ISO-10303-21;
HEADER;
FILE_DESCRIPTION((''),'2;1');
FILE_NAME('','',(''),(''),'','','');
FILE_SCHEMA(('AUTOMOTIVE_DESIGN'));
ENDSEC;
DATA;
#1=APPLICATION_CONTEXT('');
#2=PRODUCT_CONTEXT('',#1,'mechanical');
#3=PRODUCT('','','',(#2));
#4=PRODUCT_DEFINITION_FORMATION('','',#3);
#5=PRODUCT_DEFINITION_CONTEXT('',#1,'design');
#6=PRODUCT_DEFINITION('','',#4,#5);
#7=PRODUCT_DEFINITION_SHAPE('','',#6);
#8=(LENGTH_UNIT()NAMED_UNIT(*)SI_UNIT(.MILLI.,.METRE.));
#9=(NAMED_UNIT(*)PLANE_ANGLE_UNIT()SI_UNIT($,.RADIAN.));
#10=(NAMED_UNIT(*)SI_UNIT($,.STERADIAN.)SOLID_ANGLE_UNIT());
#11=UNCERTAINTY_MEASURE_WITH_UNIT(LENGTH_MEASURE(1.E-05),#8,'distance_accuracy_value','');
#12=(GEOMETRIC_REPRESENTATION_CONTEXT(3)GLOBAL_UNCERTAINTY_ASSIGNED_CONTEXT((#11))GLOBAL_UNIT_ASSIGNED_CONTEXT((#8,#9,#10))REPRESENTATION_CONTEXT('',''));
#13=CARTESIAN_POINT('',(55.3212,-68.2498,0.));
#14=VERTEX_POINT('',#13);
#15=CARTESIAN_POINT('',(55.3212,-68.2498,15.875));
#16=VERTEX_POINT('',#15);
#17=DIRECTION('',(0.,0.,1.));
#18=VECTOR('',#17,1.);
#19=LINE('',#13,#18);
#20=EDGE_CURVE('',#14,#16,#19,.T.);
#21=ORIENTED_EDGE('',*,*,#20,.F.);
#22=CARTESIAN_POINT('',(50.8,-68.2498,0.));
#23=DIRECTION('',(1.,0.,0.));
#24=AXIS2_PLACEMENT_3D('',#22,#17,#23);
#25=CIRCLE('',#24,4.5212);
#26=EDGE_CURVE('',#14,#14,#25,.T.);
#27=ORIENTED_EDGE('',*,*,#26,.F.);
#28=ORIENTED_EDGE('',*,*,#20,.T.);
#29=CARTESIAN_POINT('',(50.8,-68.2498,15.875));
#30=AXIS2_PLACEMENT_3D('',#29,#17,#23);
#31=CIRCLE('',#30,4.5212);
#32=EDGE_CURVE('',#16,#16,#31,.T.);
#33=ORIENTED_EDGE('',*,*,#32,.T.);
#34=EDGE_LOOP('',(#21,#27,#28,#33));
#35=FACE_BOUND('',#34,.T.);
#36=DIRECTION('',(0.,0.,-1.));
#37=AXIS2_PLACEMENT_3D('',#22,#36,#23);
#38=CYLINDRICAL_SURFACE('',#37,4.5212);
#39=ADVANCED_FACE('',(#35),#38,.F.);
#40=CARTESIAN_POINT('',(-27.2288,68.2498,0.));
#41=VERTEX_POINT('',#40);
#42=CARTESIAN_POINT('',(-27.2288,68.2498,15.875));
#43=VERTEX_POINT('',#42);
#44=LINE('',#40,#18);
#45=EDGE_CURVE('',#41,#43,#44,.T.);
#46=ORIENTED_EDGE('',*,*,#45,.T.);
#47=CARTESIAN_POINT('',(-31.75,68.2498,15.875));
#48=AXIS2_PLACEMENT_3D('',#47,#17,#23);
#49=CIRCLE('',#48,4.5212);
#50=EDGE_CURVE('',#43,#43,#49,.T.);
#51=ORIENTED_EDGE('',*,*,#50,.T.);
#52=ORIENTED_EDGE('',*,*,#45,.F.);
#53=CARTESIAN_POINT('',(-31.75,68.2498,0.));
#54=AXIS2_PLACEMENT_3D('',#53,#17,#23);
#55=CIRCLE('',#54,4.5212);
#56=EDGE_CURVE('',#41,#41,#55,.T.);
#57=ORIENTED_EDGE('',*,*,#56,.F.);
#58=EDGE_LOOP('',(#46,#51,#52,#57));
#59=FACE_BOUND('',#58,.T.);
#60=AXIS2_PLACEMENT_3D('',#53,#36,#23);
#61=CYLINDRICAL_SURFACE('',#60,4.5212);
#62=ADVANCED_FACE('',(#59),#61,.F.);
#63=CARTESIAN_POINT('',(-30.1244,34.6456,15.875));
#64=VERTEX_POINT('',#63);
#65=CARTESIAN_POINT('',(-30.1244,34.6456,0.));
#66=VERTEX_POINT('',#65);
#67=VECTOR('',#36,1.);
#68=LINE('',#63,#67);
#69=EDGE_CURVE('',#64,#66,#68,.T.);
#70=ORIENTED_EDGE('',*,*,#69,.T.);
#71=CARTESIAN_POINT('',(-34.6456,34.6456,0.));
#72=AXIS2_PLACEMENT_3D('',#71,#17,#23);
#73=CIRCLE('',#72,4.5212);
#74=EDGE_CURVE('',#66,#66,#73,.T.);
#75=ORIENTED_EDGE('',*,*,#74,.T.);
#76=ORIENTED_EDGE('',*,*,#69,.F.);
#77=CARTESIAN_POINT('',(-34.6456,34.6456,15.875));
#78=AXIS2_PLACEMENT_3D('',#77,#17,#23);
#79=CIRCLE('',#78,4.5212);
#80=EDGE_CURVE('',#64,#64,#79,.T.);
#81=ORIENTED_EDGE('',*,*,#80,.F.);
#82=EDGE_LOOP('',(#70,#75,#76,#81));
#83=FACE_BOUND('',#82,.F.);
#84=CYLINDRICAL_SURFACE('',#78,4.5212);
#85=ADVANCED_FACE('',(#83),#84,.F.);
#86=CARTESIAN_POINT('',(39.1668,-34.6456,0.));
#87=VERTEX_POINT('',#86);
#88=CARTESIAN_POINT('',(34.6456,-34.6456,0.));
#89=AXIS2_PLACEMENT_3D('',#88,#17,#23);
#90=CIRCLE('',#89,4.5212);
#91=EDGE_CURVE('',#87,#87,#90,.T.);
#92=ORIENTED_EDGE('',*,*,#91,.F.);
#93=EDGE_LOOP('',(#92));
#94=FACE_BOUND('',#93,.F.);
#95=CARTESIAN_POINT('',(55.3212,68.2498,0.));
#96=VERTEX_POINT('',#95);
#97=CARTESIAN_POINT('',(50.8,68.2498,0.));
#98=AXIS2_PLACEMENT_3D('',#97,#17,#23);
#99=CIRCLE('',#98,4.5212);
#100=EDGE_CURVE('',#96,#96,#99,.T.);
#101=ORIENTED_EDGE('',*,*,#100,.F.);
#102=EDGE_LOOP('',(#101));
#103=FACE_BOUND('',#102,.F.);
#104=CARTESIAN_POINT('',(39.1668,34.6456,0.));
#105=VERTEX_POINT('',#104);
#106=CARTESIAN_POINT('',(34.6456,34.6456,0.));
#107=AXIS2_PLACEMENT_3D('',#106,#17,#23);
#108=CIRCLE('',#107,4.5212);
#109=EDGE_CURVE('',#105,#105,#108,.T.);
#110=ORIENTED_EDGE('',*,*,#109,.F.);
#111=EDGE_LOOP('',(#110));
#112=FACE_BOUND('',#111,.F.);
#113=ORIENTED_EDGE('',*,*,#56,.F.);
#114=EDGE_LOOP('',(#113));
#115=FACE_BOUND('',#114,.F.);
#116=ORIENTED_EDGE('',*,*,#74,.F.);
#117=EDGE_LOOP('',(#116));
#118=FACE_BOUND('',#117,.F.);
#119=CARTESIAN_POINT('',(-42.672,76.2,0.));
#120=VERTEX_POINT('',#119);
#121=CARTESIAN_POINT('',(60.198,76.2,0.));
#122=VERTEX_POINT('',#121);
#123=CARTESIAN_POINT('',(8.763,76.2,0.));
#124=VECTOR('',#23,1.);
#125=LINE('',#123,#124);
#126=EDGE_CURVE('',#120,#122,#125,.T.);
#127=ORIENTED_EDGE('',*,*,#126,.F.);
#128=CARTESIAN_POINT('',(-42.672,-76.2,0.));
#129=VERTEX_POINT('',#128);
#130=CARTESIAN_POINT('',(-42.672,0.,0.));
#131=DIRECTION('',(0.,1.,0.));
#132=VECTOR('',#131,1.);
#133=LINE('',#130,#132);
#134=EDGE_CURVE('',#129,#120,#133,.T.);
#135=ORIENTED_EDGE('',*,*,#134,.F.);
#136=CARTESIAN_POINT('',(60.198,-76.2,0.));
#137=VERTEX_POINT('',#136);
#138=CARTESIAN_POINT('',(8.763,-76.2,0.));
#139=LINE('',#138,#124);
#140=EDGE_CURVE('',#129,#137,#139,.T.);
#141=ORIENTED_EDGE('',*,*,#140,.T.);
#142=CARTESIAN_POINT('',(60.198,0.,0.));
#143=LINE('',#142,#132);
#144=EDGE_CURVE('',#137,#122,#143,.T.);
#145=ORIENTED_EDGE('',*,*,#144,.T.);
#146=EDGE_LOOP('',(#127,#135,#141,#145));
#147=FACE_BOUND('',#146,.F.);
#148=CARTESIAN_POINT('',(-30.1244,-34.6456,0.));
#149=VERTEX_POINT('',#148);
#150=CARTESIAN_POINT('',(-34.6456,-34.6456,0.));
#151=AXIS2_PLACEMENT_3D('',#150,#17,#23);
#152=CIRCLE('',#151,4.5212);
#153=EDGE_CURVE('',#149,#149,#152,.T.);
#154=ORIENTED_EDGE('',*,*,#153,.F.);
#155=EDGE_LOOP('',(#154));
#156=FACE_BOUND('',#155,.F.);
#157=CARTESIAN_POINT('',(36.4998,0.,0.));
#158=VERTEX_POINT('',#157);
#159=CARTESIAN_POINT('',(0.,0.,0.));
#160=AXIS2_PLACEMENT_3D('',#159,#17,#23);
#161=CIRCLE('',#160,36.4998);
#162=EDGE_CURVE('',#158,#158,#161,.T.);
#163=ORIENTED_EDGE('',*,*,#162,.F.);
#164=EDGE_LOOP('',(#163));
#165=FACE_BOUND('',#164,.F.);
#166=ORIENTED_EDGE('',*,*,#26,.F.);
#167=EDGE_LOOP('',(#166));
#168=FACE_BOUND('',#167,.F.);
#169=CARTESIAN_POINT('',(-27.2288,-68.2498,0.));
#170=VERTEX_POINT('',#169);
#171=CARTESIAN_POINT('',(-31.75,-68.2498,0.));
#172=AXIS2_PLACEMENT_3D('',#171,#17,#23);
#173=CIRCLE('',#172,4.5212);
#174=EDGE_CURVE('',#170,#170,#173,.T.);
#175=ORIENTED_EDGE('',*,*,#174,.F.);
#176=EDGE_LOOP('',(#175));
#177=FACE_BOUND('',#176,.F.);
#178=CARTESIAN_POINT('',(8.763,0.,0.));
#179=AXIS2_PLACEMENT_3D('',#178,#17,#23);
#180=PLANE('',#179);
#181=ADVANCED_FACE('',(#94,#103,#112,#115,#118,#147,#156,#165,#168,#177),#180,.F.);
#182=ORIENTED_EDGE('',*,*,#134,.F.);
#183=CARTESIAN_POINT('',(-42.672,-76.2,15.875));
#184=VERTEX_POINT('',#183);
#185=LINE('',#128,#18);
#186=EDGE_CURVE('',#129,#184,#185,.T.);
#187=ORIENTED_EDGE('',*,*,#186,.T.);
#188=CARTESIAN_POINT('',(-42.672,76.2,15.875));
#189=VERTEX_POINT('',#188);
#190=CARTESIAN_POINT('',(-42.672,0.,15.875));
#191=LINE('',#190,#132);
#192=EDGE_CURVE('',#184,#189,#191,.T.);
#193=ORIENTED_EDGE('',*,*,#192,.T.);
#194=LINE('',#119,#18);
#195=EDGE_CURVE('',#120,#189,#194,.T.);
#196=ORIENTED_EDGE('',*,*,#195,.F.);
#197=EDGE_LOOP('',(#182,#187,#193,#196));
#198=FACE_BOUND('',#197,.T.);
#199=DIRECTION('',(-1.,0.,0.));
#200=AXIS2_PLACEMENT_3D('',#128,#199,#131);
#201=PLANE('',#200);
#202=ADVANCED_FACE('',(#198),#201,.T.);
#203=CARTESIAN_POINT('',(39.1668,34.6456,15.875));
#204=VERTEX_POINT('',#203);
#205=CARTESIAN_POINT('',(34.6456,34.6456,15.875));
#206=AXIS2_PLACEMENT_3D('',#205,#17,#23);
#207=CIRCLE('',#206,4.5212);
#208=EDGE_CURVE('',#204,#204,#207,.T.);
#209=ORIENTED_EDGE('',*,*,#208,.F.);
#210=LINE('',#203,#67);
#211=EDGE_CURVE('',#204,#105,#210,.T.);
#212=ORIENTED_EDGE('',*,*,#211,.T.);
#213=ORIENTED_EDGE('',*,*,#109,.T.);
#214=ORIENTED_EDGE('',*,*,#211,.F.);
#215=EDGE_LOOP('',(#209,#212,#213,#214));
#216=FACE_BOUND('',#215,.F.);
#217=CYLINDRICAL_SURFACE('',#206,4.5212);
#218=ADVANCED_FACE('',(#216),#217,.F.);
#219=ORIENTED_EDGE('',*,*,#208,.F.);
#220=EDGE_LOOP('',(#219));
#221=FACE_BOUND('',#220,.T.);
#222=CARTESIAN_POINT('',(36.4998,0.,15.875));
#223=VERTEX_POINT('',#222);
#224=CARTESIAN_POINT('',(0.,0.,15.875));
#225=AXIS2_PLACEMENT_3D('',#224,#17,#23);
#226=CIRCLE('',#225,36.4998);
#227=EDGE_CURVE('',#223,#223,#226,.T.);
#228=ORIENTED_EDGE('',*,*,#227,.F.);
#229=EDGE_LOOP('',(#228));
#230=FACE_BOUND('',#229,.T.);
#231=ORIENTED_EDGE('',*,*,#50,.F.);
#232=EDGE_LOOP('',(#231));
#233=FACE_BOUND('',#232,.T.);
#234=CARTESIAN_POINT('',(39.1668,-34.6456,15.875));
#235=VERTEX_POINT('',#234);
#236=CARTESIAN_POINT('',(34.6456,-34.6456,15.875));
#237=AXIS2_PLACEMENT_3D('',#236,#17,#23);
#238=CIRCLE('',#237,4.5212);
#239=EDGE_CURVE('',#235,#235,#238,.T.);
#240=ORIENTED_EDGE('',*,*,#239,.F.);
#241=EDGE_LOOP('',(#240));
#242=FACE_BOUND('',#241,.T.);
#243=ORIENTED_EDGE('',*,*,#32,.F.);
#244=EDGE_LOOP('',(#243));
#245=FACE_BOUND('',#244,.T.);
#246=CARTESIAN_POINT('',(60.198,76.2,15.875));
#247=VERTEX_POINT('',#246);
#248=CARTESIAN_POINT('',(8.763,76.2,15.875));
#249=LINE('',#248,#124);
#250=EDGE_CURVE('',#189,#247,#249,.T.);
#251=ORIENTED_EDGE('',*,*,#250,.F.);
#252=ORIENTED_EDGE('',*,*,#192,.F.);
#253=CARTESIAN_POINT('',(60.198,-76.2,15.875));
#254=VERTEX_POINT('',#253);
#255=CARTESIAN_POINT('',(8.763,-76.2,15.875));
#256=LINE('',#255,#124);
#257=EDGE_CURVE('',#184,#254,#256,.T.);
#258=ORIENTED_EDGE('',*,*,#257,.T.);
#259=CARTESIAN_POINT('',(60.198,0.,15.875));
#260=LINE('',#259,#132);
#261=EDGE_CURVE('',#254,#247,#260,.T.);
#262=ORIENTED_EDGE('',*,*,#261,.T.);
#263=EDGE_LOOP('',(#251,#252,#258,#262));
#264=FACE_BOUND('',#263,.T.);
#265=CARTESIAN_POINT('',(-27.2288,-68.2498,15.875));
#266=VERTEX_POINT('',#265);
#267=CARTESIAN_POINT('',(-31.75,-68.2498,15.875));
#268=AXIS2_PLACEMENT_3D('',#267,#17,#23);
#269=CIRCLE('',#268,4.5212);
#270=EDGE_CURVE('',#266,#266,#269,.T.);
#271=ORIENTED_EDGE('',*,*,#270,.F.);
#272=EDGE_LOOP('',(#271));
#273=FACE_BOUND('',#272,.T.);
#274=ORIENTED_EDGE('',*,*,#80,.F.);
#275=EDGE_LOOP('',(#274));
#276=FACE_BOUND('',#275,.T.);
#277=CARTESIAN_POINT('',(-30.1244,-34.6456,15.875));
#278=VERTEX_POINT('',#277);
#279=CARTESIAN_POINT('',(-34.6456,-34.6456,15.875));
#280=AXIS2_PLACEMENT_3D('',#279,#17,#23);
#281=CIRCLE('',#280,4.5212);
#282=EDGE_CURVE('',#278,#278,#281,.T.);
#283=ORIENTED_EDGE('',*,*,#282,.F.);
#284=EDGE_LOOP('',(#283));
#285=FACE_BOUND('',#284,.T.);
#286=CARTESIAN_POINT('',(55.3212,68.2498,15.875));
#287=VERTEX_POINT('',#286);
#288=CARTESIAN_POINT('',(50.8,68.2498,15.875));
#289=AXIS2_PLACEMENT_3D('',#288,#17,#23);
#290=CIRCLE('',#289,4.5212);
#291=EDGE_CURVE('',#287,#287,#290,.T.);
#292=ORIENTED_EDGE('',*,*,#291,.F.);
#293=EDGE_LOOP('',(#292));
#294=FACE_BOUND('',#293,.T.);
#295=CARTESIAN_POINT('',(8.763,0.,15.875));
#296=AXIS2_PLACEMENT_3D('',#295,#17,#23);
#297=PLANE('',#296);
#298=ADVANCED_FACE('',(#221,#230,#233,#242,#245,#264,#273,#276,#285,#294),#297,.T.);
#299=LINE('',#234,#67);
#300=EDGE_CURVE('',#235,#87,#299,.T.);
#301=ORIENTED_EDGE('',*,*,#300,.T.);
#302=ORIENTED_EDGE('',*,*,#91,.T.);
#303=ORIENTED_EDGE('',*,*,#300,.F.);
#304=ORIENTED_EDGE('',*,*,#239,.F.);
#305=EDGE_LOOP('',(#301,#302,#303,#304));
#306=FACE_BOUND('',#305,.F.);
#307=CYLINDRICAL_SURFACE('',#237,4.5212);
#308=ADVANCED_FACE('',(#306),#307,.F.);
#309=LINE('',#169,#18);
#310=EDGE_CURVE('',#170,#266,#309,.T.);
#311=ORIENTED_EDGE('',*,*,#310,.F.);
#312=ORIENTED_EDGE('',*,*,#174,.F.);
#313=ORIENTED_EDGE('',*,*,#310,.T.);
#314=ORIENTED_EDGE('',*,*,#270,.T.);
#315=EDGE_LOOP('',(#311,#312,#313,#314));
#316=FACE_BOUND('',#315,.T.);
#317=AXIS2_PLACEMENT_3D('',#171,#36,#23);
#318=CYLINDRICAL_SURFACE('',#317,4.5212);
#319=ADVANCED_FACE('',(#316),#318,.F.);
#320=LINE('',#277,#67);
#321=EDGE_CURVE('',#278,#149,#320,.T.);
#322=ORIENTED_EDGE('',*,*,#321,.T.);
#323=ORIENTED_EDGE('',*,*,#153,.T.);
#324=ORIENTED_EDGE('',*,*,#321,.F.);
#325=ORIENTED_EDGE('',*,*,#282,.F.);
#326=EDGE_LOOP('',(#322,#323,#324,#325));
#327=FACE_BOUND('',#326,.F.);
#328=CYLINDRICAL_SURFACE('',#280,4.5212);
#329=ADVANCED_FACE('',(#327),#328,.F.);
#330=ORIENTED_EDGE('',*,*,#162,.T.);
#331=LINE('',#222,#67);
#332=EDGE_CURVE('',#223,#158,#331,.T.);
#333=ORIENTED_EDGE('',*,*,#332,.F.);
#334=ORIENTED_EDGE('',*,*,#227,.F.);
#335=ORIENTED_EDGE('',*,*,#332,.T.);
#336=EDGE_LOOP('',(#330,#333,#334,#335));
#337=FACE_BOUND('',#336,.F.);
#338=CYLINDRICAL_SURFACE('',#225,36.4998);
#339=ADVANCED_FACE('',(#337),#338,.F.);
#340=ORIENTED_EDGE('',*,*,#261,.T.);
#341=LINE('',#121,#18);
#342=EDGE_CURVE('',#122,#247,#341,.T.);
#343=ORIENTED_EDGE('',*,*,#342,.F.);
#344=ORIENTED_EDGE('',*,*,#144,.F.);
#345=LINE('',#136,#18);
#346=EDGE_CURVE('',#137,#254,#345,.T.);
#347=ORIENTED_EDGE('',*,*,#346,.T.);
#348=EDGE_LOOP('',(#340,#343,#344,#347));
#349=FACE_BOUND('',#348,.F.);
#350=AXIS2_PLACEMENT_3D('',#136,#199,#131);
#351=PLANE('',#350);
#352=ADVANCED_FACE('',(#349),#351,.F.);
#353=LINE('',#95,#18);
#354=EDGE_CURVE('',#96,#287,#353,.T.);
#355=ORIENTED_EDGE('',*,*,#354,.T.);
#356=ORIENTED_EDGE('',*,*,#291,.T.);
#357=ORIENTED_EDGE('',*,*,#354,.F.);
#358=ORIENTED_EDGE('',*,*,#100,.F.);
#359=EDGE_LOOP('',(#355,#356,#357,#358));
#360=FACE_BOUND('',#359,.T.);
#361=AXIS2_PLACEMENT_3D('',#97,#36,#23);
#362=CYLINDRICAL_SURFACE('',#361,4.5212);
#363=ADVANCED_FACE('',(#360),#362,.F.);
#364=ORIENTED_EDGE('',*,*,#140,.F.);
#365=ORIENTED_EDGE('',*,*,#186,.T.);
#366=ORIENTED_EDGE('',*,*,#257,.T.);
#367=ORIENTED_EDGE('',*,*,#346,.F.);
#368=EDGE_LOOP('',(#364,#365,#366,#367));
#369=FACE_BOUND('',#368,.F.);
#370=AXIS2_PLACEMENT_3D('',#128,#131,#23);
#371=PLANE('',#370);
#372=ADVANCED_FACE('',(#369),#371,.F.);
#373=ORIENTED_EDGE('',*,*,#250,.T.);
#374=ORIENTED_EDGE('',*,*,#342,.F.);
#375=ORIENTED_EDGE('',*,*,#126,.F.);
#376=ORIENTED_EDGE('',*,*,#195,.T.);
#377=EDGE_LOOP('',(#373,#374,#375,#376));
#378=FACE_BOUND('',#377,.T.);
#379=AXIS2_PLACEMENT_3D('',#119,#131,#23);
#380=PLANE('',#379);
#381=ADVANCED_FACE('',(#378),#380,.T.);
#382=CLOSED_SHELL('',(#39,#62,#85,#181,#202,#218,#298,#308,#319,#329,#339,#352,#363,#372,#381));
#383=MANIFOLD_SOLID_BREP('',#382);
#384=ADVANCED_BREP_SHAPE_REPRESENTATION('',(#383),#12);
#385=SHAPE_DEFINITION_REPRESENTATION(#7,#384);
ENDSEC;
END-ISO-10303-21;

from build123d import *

# Parameters (mm, degrees)
F0_W     = 102.87
F0_H     = 152.4
F0_R     = 4.5212
F1_DEPTH = 15.875
F2_DEPTH = 197
F3_R     = 36.4998
F4_DEPTH = 15.876
F5_R     = 4.5212
F6_DEPTH = 15.876


# Not quite as in the source:
# - an extrude ends at something that could not be found from the text; its depth is read off the source's solid


with BuildPart() as f1:
    # F0 (on Top) → F1 (new body)
    with BuildSketch(Plane.XY):
        with Locations((8.763, 0)):
            Rectangle(F0_W, F0_H)
        with Locations((-31.75, -68.2498)):
            Circle(F0_R, mode=Mode.SUBTRACT)
        with Locations((50.8, -68.2498)):
            Circle(F0_R, mode=Mode.SUBTRACT)
        with Locations((-31.75, 68.2498)):
            Circle(F0_R, mode=Mode.SUBTRACT)
        with Locations((50.8, 68.2498)):
            Circle(F0_R, mode=Mode.SUBTRACT)
    extrude(amount=F1_DEPTH)

    # F0 (on Top) → F2 (cut, through all)
    with BuildSketch(Plane.XY):
        with Locations((8.763, 0)):
            Rectangle(F0_W, F0_H)
        with Locations((-31.75, -68.2498)):
            Circle(F0_R, mode=Mode.SUBTRACT)
        with Locations((50.8, -68.2498)):
            Circle(F0_R, mode=Mode.SUBTRACT)
        with Locations((-31.75, 68.2498)):
            Circle(F0_R, mode=Mode.SUBTRACT)
        with Locations((50.8, 68.2498)):
            Circle(F0_R, mode=Mode.SUBTRACT)
    extrude(amount=-F2_DEPTH, mode=Mode.SUBTRACT)

    # F3 (on face) → F4 (cut, through all)
    with BuildSketch(Plane.XY.offset(15.875)):
        Circle(F3_R)
    extrude(amount=-F4_DEPTH, mode=Mode.SUBTRACT)

    # F5 (on face) → F6 (cut, through all)
    with BuildSketch(Plane.XY.offset(15.875)):
        with Locations((-34.6456, 34.6456)):
            Circle(F5_R)
        with Locations((34.6456, 34.6456)):
            Circle(F5_R)
        with Locations((34.6456, -34.6456)):
            Circle(F5_R)
        with Locations((-34.6456, -34.6456)):
            Circle(F5_R)
    extrude(amount=-F6_DEPTH, mode=Mode.SUBTRACT)


solid = f1.part
